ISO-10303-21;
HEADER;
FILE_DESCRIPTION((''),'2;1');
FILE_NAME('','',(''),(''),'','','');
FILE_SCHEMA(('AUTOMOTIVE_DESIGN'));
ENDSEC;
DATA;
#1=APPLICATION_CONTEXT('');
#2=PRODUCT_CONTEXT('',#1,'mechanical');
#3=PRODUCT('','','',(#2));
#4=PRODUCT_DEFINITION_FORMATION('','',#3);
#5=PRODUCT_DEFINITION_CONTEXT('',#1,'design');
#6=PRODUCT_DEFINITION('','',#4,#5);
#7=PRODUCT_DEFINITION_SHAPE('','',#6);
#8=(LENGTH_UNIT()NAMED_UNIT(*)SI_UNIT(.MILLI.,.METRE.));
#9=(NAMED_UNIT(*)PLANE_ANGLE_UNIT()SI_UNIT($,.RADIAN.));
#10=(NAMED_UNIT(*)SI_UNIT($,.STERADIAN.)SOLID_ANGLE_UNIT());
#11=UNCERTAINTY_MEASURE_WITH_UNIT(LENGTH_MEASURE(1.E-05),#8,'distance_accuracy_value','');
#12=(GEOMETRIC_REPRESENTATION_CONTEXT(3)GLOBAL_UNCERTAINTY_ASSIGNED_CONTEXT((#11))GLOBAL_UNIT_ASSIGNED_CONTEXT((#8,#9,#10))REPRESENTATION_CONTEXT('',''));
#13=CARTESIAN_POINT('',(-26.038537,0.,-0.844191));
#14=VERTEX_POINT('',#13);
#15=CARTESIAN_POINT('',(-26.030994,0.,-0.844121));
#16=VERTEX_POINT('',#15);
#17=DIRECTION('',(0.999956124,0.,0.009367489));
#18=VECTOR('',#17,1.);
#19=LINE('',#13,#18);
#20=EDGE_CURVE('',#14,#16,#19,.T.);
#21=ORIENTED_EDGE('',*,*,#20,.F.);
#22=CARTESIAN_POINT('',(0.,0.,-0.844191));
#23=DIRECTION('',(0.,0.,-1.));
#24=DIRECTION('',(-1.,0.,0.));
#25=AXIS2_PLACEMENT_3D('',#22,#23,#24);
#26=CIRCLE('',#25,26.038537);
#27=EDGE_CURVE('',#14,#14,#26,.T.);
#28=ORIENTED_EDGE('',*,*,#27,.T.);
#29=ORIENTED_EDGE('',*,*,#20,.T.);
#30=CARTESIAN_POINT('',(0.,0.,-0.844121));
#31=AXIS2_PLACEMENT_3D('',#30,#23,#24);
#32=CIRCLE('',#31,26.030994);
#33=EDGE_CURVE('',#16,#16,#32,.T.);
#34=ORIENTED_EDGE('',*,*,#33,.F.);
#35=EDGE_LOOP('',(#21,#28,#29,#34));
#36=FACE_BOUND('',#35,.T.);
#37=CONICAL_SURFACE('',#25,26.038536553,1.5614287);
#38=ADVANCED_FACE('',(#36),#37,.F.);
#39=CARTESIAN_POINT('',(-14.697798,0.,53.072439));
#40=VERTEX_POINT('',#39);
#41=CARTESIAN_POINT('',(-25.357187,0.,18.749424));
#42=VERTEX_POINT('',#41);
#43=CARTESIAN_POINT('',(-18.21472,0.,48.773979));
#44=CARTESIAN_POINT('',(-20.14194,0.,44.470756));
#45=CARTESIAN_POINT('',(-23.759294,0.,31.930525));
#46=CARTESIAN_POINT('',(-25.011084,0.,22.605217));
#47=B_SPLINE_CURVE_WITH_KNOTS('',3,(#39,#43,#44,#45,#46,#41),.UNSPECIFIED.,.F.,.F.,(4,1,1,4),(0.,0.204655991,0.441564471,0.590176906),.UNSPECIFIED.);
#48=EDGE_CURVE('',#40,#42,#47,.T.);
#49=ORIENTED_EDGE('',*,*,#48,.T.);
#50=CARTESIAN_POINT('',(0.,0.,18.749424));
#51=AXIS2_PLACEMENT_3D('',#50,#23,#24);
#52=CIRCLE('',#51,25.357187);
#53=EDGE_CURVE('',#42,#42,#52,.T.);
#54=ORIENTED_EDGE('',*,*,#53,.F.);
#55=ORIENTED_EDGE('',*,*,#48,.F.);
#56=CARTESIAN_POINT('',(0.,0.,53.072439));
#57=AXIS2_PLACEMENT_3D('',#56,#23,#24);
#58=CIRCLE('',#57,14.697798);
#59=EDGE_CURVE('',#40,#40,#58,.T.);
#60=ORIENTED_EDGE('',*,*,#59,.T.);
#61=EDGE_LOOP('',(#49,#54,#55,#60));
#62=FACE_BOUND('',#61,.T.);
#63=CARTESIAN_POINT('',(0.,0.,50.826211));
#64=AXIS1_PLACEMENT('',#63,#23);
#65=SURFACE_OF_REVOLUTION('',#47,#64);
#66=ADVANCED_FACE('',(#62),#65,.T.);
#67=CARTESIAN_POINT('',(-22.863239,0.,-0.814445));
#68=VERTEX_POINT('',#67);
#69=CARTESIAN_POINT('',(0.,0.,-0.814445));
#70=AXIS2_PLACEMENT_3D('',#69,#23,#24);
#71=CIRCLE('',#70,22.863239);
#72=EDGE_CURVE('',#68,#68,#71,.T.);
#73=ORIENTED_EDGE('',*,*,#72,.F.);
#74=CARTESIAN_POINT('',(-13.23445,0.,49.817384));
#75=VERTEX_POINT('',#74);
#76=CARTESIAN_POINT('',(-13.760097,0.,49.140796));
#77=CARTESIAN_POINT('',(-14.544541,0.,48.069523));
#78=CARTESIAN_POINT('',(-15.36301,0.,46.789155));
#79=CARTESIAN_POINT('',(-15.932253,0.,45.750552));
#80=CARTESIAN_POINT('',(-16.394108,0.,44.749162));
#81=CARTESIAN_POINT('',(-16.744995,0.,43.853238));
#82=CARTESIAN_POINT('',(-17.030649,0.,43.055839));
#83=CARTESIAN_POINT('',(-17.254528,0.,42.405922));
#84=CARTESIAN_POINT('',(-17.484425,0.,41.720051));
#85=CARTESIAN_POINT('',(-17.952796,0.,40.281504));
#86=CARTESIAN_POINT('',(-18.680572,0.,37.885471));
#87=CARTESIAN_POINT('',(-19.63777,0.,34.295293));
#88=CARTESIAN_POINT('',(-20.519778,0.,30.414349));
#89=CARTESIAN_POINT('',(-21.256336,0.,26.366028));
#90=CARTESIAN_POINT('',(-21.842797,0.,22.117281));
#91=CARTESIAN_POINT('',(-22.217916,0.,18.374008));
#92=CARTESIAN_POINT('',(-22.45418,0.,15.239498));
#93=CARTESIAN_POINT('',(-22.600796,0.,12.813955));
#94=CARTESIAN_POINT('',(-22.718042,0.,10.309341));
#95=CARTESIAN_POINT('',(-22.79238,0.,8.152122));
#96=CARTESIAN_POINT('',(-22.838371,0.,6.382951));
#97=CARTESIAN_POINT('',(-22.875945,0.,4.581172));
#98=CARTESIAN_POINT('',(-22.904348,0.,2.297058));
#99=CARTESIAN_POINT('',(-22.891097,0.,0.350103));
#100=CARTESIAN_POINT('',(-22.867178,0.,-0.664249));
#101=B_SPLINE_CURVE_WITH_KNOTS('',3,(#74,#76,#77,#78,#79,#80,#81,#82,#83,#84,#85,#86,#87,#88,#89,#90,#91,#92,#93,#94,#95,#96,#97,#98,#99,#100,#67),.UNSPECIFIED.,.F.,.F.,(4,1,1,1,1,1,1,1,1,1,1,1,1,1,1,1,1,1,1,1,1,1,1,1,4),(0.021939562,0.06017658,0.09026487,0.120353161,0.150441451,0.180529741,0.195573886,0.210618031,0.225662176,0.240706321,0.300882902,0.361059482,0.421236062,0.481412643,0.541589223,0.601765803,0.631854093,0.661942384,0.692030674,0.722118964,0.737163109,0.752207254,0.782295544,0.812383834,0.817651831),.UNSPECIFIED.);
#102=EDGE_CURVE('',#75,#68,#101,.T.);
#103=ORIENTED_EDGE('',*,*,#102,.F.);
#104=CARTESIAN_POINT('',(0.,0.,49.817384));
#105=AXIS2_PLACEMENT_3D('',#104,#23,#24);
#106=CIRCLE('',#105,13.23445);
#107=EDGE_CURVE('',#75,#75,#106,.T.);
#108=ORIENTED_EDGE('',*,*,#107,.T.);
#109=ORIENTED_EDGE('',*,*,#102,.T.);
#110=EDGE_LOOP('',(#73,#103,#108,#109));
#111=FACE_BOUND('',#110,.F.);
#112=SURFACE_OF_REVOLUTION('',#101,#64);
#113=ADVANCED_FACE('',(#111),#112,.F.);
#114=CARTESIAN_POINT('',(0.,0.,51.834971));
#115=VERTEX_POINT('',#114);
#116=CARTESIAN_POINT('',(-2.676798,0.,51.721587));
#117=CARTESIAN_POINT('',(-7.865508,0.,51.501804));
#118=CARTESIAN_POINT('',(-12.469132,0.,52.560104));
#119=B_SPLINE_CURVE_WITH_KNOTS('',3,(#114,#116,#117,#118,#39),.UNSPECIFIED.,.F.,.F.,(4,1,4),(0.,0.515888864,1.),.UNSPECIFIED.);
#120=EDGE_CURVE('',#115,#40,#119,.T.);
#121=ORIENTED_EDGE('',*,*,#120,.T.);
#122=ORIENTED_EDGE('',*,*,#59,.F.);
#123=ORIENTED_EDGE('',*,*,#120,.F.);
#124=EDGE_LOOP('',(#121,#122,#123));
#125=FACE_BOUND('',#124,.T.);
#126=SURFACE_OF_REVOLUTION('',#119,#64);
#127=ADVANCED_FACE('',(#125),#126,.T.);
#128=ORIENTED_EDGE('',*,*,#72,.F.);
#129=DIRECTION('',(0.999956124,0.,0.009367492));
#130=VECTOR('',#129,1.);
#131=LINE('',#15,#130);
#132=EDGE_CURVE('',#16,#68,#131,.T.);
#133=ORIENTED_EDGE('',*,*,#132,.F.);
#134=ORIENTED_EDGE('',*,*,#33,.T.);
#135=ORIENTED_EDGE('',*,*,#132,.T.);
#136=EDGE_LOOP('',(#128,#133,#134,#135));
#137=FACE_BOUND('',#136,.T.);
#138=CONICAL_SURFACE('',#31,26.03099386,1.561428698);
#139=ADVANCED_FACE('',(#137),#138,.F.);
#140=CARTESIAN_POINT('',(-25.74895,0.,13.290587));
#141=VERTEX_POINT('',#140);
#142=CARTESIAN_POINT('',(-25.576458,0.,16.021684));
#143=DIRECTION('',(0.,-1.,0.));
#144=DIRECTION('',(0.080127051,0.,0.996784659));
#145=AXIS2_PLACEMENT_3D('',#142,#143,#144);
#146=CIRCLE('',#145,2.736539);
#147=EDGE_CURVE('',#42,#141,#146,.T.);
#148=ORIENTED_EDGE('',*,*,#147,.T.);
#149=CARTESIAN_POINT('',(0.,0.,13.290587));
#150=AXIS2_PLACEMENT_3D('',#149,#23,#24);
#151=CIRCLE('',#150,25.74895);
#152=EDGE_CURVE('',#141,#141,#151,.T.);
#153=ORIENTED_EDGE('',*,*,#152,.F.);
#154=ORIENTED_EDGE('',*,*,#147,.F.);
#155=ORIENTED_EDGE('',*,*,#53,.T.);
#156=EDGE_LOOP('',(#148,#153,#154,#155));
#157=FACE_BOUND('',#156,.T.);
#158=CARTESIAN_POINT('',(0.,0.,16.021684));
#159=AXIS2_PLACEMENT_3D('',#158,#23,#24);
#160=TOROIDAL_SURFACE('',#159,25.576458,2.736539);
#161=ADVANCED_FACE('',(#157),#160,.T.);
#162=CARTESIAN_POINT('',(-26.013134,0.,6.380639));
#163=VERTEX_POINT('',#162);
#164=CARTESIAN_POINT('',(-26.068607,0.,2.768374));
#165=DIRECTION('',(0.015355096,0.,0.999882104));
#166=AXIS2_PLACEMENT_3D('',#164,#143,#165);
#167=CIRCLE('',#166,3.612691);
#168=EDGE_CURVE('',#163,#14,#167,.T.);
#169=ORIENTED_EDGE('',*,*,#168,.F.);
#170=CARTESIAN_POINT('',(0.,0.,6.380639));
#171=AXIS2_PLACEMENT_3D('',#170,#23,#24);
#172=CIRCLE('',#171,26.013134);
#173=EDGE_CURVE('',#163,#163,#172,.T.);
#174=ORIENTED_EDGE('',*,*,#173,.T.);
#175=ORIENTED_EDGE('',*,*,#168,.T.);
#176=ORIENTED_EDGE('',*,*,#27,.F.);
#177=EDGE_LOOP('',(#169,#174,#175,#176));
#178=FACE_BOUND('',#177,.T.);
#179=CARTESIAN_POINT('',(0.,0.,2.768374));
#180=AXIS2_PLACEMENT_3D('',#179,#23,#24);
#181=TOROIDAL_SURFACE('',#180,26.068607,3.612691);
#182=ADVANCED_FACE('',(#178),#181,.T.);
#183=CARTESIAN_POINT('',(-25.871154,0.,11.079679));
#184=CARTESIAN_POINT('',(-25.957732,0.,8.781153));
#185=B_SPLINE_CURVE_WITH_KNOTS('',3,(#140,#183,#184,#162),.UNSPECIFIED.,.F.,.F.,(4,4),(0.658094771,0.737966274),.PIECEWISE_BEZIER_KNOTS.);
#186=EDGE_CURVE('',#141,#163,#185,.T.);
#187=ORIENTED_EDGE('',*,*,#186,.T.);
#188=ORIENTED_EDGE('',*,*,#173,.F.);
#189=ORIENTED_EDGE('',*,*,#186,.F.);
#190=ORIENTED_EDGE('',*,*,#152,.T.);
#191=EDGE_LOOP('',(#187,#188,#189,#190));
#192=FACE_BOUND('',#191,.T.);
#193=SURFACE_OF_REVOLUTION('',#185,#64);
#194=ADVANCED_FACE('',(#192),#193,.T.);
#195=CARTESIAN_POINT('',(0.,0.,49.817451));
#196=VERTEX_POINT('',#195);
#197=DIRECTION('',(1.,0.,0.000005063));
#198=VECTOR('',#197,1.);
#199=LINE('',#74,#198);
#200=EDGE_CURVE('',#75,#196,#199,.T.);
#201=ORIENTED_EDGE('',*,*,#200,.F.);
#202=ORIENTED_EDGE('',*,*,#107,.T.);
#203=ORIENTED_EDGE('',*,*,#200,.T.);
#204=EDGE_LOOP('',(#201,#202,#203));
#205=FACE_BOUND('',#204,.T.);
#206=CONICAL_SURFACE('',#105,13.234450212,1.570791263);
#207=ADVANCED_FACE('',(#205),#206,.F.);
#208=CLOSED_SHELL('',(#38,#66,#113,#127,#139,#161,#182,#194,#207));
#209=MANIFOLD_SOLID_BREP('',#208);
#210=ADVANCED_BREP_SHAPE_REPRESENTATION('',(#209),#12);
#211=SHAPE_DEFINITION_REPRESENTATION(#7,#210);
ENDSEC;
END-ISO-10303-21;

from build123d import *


# Not quite as in the source:
# - ends of sketch curves that miss each other by under 0.0002 mm in the source are joined
# - the dataset's text gives a spline's control points without its knots; the knots are read off the source's solid


with BuildPart() as f1:
    # F0 (on Front) → F1 (revolve)
    with BuildSketch(Plane.XZ):
        with BuildLine():
            add(Edge.make_bspline(
                [(0, 51.8349707127), (-2.6767978484, 51.7215871816), (-7.8655081191, 51.5018043195), (-12.4691320301, 52.5601040677), (-14.6977976302, 53.0724387607)],
                knots=[0, 0, 0, 0, 0.5158888642, 1, 1, 1, 1], degree=3))
            add(Edge.make_bspline(
                [(-14.6977976302, 53.0724387607), (-18.2147203351, 48.7739790222), (-20.1419404379, 44.4707555908), (-23.7592940633, 31.9305252816), (-25.0110844712, 22.6052167069), (-25.3571867516, 18.7494243412)],
                knots=[0, 0, 0, 0, 0.2046559912, 0.4415644707, 0.5901769055, 0.5901769055, 0.5901769055, 0.5901769055], degree=3))
            add(Edge.make_bspline(
                [(-25.3571867516, 18.7494243412), (-25.515360112, 16.9872757795), (-25.6450356494, 15.1706085799), (-25.7489504179, 13.2905869356)],
                knots=[0.5901769055, 0.5901769055, 0.5901769055, 0.5901769055, 0.6580947712, 0.6580947712, 0.6580947712, 0.6580947712], degree=3))
            add(Edge.make_bspline(
                [(-25.7489504179, 13.2905869356), (-25.8711543278, 11.0796789077), (-25.9577316296, 8.7811529991), (-26.0131338283, 6.3806387815)],
                knots=[0.6580947712, 0.6580947712, 0.6580947712, 0.6580947712, 0.7379662743, 0.7379662743, 0.7379662743, 0.7379662743], degree=3))
            add(Edge.make_bspline(
                [(-26.0131338283, 6.3806387815), (-26.0191577302, 6.1196299667), (-26.07065614, 3.7318635709), (-26.0920671828, 1.2425833051), (-26.0385365534, -0.8441913051)],
                knots=[0.7379662743, 0.7379662743, 0.7379662743, 0.7379662743, 0.7466507329, 0.8170483023, 0.8170483023, 0.8170483023, 0.8170483023], degree=3))
            Line((-26.0385365534, -0.8441913051), (-26.03099386, -0.8441206459))
            Line((-26.03099386, -0.8441206459), (-22.863238975, -0.8144454249))
            add(Edge.make_bspline(
                [(-13.2344502119, 49.8173839969), (-13.7600966459, 49.1407955568), (-14.5445414508, 48.0695229262), (-15.3630101583, 46.7891548297), (-15.9322532815, 45.7505517563), (-16.3941075068, 44.7491624028), (-16.7449950191, 43.8532384759), (-17.0306485224, 43.0558388301), (-17.2545277505, 42.4059217152), (-17.484425349, 41.720050889), (-17.9527961024, 40.2815042736), (-18.6805724441, 37.8854714001), (-19.637769837, 34.2952932796), (-20.5197777028, 30.4143486869), (-21.2563356013, 26.3660280714), (-21.8427967136, 22.1172814417), (-22.217915795, 18.3740079984), (-22.454179754, 15.2394975993), (-22.600796116, 12.813955144), (-22.718041854, 10.309340805), (-22.7923803853, 8.1521216767), (-22.8383710558, 6.382950797), (-22.8759453933, 4.5811718303), (-22.9043477549, 2.2970575919), (-22.8910974121, 0.3501033703), (-22.867178308, -0.6642488127), (-22.863238975, -0.8144454249)],
                knots=[0.021939562, 0.021939562, 0.021939562, 0.021939562, 0.0601765803, 0.0902648705, 0.1203531607, 0.1504414508, 0.180529741, 0.1955738861, 0.2106180312, 0.2256621762, 0.2407063213, 0.3008829017, 0.361059482, 0.4212360623, 0.4814126427, 0.541589223, 0.6017658033, 0.6318540935, 0.6619423837, 0.6920306738, 0.722118964, 0.7371631091, 0.7522072542, 0.7822955443, 0.8123838345, 0.8176518315, 0.8176518315, 0.8176518315, 0.8176518315], degree=3))
            Line((-13.2344502119, 49.8173839969), (0, 49.8174510092))
            Line((0, 49.8174510092), (0, 51.8349707127))
        make_face()
        with BuildLine():
            add(Edge.make_bspline(
                [(-25.3571867516, 18.7494243412), (-25.515360112, 16.9872757795), (-25.6450356494, 15.1706085799), (-25.7489504179, 13.2905869356)],
                knots=[0.5901769055, 0.5901769055, 0.5901769055, 0.5901769055, 0.6580947712, 0.6580947712, 0.6580947712, 0.6580947712], degree=3))
            ThreePointArc((-25.3571867516, 18.7494243412), (-28.3059764683, 16.2175732164), (-25.7489504179, 13.2905869356))
        make_face()
        with BuildLine():
            add(Edge.make_bspline(
                [(-26.0131338283, 6.3806387815), (-26.0191577302, 6.1196299667), (-26.07065614, 3.7318635709), (-26.0920671828, 1.2425833051), (-26.0385365534, -0.8441913051)],
                knots=[0.7379662743, 0.7379662743, 0.7379662743, 0.7379662743, 0.7466507329, 0.8170483023, 0.8170483023, 0.8170483023, 0.8170483023], degree=3))
            ThreePointArc((-26.0131338283, 6.3806387815), (-29.6812752877, 2.7810763782), (-26.0385365534, -0.8441913051))
        make_face()
    revolve(axis=Axis((0, 0, 50.8262108609), (0, 0, -1)))


solid = f1.part
